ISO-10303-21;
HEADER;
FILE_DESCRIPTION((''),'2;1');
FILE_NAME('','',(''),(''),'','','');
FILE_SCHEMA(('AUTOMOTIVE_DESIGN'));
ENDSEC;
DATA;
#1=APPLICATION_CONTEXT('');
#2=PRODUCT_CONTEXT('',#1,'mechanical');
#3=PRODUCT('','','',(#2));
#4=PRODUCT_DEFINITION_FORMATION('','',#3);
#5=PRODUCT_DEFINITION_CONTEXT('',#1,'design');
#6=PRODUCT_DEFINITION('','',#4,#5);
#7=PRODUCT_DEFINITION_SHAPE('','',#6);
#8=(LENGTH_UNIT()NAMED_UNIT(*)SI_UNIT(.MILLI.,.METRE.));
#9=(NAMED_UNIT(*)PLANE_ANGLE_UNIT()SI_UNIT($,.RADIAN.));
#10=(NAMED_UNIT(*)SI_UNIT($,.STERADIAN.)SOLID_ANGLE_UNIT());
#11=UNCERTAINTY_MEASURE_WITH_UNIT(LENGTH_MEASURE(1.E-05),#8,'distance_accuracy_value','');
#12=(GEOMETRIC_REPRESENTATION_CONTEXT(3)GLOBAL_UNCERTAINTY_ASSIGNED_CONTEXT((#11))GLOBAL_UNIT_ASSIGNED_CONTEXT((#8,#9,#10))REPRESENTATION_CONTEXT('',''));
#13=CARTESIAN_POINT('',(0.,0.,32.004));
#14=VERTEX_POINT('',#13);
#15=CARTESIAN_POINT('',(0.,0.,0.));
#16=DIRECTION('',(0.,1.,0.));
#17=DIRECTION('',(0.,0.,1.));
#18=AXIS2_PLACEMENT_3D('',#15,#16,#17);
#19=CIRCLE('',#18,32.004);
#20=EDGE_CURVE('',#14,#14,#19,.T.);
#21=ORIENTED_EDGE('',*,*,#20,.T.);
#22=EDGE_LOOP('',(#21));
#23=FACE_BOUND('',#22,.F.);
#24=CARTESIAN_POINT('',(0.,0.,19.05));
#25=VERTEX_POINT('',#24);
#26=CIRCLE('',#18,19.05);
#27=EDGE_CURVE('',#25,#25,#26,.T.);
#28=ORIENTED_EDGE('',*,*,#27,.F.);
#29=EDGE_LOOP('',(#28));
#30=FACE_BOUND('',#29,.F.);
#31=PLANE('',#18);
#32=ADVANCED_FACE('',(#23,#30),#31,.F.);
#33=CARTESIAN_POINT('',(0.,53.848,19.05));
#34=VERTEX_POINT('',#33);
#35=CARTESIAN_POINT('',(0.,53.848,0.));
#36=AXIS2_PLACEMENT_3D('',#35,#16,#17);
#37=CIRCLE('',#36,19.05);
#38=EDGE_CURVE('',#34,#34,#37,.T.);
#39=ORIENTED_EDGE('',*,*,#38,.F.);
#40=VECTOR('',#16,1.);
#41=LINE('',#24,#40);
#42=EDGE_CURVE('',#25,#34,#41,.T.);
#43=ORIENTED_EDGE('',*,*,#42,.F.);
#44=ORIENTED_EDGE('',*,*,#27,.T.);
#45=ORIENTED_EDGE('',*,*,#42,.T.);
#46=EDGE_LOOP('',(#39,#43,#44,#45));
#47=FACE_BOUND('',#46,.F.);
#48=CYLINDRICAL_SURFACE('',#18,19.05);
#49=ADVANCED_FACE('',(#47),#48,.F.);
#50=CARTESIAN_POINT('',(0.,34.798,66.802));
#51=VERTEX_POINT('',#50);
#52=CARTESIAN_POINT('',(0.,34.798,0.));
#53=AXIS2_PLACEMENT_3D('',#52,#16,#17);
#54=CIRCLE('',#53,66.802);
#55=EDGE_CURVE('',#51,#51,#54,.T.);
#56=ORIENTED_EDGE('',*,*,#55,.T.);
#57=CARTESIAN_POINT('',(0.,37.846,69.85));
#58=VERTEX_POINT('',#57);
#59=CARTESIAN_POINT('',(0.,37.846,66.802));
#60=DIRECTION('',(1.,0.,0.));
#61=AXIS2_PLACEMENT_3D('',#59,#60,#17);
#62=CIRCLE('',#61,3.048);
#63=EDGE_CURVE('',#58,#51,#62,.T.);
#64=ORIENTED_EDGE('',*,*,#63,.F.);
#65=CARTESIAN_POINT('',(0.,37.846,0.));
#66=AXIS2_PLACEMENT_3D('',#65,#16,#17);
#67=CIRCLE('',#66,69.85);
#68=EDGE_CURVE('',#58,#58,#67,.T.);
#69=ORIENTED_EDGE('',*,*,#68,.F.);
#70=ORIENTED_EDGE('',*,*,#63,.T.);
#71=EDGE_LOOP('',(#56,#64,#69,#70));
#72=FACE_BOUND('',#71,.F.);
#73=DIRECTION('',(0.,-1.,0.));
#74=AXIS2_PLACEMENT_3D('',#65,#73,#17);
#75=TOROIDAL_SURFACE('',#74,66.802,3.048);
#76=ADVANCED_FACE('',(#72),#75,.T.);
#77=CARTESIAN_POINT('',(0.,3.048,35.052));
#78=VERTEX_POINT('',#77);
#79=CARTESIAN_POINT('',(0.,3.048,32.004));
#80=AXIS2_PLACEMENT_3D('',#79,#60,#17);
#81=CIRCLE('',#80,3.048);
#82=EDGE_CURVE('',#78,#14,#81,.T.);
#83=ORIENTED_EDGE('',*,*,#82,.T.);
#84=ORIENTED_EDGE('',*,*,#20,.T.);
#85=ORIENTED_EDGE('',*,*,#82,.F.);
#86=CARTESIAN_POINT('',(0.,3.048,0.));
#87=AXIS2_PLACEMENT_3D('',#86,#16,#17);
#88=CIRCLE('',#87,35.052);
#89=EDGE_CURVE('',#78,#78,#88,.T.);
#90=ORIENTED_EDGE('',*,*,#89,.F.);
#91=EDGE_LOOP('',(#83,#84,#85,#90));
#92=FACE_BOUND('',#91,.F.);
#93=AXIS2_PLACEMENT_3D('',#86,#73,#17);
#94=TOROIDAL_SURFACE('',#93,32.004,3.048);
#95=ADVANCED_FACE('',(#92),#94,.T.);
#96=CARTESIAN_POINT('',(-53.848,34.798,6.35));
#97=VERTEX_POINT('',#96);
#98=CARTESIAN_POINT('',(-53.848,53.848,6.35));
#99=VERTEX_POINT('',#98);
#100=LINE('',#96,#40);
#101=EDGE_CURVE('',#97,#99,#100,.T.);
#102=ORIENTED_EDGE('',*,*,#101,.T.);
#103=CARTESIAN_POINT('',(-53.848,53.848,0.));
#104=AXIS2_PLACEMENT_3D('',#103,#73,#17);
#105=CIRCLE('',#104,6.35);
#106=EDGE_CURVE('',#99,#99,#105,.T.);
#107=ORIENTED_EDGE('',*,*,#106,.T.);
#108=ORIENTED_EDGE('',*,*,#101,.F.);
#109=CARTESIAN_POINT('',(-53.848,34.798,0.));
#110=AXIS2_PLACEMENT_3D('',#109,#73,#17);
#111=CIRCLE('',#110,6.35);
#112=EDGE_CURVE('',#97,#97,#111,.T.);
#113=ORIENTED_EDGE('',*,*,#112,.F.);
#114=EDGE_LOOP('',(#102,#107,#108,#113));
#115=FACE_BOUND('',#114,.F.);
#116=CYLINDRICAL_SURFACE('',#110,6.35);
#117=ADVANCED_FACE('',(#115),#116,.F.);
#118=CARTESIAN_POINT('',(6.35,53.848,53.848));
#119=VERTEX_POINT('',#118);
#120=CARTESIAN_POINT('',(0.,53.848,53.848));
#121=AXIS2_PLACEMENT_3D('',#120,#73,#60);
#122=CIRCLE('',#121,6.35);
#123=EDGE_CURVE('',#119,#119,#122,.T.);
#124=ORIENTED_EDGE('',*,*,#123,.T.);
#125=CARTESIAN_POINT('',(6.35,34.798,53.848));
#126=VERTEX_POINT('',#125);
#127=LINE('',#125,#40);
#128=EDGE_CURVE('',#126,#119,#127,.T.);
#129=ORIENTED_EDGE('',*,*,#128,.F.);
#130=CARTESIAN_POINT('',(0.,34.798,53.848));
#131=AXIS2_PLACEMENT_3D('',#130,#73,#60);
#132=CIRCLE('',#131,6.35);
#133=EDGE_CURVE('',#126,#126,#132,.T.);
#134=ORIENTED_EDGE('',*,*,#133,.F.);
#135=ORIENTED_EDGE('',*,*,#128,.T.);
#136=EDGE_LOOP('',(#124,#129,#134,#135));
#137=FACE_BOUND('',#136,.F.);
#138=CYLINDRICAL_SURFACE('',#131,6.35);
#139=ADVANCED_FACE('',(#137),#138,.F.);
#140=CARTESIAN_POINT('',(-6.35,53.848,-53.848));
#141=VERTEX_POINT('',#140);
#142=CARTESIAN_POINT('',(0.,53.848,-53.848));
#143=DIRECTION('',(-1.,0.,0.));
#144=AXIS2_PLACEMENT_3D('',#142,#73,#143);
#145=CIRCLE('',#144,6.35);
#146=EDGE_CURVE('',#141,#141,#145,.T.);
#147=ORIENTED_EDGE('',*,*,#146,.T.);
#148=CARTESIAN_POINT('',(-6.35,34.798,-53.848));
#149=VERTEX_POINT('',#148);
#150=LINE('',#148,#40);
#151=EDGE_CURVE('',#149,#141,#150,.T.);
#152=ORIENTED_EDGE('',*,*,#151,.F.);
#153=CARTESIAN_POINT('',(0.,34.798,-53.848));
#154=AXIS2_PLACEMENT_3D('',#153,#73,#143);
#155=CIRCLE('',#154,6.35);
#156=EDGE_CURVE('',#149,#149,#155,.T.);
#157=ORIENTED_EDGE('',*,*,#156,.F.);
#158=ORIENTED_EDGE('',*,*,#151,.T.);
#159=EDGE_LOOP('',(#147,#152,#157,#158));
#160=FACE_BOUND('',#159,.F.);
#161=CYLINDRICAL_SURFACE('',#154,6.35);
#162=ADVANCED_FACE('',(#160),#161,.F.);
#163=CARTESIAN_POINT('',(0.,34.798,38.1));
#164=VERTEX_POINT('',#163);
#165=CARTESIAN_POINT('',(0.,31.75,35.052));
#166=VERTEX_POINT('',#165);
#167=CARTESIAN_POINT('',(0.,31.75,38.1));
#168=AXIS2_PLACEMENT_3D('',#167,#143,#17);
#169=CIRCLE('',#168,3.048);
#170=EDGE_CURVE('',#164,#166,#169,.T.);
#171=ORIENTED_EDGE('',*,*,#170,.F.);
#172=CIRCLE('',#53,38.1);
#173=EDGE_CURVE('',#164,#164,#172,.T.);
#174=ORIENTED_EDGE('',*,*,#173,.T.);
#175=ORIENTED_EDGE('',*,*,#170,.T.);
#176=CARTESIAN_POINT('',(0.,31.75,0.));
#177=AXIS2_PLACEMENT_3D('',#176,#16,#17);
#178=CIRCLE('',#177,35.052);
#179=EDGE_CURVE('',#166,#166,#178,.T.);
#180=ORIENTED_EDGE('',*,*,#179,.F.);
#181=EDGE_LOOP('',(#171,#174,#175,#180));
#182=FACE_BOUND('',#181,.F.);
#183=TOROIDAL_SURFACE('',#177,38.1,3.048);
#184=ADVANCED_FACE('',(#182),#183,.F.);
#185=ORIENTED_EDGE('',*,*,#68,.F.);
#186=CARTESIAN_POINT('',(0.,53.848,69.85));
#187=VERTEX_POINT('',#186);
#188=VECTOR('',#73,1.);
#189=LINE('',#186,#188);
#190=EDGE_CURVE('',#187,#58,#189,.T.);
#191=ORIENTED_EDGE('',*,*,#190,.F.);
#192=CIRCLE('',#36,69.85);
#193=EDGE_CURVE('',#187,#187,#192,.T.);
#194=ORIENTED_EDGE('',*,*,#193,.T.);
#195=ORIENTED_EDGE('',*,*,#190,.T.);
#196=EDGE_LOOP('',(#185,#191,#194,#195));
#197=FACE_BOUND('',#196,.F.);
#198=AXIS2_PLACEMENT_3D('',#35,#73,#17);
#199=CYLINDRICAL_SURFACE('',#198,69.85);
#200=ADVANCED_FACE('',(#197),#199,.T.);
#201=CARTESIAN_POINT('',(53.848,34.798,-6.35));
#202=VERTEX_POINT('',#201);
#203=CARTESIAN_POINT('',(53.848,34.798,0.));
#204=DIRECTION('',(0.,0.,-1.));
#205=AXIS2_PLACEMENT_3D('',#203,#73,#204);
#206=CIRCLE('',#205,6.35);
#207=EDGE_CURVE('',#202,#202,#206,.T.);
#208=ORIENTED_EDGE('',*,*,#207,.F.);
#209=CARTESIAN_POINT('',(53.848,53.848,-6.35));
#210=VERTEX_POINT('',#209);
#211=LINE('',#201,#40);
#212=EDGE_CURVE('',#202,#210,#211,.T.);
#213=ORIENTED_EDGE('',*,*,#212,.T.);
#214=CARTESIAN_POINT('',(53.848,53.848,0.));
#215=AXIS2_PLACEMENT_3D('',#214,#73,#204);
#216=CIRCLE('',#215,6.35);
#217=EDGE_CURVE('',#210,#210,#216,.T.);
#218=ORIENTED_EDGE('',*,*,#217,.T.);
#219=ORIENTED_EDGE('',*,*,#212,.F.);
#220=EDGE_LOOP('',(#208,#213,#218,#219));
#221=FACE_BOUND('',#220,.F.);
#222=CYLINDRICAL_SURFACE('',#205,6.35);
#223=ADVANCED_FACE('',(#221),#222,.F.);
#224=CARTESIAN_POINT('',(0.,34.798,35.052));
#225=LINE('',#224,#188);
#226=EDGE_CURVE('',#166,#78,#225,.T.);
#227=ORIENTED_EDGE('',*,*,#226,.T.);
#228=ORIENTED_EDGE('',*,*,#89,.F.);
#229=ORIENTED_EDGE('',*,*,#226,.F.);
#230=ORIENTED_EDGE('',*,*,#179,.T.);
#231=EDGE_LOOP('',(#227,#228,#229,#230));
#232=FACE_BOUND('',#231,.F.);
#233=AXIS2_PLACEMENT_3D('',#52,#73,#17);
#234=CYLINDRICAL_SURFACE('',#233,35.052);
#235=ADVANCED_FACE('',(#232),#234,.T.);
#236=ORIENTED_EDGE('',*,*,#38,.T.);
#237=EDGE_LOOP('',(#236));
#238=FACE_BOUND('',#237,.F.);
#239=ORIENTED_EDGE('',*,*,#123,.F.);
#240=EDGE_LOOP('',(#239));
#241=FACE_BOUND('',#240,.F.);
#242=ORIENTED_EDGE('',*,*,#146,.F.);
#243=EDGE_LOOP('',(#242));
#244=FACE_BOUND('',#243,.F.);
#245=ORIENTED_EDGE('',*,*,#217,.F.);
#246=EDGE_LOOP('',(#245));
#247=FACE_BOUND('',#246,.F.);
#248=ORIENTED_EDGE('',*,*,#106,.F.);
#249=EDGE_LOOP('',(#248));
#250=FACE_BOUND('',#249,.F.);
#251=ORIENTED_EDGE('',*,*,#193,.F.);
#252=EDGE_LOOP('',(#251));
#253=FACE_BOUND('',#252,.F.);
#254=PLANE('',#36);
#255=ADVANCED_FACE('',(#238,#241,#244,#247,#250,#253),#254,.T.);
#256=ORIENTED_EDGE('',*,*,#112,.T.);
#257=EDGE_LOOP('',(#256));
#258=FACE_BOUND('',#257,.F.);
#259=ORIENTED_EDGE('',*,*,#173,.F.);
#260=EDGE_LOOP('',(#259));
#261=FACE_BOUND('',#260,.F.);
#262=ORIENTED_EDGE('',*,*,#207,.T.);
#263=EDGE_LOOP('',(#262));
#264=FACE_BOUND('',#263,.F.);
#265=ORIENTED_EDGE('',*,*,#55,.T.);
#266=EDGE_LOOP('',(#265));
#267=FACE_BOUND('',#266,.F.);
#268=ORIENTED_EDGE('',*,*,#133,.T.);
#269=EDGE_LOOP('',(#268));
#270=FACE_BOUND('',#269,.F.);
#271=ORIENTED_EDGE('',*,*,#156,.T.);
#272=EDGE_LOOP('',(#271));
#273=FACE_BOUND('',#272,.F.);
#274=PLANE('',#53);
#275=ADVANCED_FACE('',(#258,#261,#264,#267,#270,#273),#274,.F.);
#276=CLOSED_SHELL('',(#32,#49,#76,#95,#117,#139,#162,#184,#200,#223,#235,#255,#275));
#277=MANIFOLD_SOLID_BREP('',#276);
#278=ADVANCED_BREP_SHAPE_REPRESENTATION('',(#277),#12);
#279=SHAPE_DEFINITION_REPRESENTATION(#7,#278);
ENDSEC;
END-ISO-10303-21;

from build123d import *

# Parameters (mm, degrees)
F2_R            = 3.048
F3_R            = 6.35
F4_DEPTH        = 19.051
F4_COPIES_COUNT = 4


# Not quite as in the source:
# - a pattern or mirror of a feature is missing from the dataset's text; its kind, count and spacing are read off the source's solid


with BuildPart() as f1:
    # F0 (on Right) → F1 (revolve)
    with BuildSketch(Plane.YZ):
        Polygon((0, 19.05), (53.848, 19.05), (53.848, 69.85), (34.798, 69.85), (34.798, 35.052), (0, 35.052), align=None)
    revolve(axis=Axis((0, 33.935634885, 0), (0, 1, 0)))

    # F2
    f2_edges = [f1.edges().sort_by_distance(p)[0] for p in [
        (0, 34.798, -69.85),
        (0, 34.798, -35.052),
        (0, 0, -35.052),
    ]]
    fillet(f2_edges, radius=F2_R)

    # F3 (on face) → F4 (cut, through all)
    with BuildSketch(Plane.XZ.offset(-34.798)):
        with Locations((0, 53.848)):
            Circle(F3_R)
    f4 = extrude(amount=-F4_DEPTH, mode=Mode.SUBTRACT)

    # F4_copies: F4 ×4 about axis
    f4_copies_axis = Axis((0, 0, 0), (0, 1, 0))
    for i in range(1, F4_COPIES_COUNT):
        add(f4.rotate(f4_copies_axis, i * 360 / F4_COPIES_COUNT), mode=Mode.SUBTRACT)


solid = f1.part
